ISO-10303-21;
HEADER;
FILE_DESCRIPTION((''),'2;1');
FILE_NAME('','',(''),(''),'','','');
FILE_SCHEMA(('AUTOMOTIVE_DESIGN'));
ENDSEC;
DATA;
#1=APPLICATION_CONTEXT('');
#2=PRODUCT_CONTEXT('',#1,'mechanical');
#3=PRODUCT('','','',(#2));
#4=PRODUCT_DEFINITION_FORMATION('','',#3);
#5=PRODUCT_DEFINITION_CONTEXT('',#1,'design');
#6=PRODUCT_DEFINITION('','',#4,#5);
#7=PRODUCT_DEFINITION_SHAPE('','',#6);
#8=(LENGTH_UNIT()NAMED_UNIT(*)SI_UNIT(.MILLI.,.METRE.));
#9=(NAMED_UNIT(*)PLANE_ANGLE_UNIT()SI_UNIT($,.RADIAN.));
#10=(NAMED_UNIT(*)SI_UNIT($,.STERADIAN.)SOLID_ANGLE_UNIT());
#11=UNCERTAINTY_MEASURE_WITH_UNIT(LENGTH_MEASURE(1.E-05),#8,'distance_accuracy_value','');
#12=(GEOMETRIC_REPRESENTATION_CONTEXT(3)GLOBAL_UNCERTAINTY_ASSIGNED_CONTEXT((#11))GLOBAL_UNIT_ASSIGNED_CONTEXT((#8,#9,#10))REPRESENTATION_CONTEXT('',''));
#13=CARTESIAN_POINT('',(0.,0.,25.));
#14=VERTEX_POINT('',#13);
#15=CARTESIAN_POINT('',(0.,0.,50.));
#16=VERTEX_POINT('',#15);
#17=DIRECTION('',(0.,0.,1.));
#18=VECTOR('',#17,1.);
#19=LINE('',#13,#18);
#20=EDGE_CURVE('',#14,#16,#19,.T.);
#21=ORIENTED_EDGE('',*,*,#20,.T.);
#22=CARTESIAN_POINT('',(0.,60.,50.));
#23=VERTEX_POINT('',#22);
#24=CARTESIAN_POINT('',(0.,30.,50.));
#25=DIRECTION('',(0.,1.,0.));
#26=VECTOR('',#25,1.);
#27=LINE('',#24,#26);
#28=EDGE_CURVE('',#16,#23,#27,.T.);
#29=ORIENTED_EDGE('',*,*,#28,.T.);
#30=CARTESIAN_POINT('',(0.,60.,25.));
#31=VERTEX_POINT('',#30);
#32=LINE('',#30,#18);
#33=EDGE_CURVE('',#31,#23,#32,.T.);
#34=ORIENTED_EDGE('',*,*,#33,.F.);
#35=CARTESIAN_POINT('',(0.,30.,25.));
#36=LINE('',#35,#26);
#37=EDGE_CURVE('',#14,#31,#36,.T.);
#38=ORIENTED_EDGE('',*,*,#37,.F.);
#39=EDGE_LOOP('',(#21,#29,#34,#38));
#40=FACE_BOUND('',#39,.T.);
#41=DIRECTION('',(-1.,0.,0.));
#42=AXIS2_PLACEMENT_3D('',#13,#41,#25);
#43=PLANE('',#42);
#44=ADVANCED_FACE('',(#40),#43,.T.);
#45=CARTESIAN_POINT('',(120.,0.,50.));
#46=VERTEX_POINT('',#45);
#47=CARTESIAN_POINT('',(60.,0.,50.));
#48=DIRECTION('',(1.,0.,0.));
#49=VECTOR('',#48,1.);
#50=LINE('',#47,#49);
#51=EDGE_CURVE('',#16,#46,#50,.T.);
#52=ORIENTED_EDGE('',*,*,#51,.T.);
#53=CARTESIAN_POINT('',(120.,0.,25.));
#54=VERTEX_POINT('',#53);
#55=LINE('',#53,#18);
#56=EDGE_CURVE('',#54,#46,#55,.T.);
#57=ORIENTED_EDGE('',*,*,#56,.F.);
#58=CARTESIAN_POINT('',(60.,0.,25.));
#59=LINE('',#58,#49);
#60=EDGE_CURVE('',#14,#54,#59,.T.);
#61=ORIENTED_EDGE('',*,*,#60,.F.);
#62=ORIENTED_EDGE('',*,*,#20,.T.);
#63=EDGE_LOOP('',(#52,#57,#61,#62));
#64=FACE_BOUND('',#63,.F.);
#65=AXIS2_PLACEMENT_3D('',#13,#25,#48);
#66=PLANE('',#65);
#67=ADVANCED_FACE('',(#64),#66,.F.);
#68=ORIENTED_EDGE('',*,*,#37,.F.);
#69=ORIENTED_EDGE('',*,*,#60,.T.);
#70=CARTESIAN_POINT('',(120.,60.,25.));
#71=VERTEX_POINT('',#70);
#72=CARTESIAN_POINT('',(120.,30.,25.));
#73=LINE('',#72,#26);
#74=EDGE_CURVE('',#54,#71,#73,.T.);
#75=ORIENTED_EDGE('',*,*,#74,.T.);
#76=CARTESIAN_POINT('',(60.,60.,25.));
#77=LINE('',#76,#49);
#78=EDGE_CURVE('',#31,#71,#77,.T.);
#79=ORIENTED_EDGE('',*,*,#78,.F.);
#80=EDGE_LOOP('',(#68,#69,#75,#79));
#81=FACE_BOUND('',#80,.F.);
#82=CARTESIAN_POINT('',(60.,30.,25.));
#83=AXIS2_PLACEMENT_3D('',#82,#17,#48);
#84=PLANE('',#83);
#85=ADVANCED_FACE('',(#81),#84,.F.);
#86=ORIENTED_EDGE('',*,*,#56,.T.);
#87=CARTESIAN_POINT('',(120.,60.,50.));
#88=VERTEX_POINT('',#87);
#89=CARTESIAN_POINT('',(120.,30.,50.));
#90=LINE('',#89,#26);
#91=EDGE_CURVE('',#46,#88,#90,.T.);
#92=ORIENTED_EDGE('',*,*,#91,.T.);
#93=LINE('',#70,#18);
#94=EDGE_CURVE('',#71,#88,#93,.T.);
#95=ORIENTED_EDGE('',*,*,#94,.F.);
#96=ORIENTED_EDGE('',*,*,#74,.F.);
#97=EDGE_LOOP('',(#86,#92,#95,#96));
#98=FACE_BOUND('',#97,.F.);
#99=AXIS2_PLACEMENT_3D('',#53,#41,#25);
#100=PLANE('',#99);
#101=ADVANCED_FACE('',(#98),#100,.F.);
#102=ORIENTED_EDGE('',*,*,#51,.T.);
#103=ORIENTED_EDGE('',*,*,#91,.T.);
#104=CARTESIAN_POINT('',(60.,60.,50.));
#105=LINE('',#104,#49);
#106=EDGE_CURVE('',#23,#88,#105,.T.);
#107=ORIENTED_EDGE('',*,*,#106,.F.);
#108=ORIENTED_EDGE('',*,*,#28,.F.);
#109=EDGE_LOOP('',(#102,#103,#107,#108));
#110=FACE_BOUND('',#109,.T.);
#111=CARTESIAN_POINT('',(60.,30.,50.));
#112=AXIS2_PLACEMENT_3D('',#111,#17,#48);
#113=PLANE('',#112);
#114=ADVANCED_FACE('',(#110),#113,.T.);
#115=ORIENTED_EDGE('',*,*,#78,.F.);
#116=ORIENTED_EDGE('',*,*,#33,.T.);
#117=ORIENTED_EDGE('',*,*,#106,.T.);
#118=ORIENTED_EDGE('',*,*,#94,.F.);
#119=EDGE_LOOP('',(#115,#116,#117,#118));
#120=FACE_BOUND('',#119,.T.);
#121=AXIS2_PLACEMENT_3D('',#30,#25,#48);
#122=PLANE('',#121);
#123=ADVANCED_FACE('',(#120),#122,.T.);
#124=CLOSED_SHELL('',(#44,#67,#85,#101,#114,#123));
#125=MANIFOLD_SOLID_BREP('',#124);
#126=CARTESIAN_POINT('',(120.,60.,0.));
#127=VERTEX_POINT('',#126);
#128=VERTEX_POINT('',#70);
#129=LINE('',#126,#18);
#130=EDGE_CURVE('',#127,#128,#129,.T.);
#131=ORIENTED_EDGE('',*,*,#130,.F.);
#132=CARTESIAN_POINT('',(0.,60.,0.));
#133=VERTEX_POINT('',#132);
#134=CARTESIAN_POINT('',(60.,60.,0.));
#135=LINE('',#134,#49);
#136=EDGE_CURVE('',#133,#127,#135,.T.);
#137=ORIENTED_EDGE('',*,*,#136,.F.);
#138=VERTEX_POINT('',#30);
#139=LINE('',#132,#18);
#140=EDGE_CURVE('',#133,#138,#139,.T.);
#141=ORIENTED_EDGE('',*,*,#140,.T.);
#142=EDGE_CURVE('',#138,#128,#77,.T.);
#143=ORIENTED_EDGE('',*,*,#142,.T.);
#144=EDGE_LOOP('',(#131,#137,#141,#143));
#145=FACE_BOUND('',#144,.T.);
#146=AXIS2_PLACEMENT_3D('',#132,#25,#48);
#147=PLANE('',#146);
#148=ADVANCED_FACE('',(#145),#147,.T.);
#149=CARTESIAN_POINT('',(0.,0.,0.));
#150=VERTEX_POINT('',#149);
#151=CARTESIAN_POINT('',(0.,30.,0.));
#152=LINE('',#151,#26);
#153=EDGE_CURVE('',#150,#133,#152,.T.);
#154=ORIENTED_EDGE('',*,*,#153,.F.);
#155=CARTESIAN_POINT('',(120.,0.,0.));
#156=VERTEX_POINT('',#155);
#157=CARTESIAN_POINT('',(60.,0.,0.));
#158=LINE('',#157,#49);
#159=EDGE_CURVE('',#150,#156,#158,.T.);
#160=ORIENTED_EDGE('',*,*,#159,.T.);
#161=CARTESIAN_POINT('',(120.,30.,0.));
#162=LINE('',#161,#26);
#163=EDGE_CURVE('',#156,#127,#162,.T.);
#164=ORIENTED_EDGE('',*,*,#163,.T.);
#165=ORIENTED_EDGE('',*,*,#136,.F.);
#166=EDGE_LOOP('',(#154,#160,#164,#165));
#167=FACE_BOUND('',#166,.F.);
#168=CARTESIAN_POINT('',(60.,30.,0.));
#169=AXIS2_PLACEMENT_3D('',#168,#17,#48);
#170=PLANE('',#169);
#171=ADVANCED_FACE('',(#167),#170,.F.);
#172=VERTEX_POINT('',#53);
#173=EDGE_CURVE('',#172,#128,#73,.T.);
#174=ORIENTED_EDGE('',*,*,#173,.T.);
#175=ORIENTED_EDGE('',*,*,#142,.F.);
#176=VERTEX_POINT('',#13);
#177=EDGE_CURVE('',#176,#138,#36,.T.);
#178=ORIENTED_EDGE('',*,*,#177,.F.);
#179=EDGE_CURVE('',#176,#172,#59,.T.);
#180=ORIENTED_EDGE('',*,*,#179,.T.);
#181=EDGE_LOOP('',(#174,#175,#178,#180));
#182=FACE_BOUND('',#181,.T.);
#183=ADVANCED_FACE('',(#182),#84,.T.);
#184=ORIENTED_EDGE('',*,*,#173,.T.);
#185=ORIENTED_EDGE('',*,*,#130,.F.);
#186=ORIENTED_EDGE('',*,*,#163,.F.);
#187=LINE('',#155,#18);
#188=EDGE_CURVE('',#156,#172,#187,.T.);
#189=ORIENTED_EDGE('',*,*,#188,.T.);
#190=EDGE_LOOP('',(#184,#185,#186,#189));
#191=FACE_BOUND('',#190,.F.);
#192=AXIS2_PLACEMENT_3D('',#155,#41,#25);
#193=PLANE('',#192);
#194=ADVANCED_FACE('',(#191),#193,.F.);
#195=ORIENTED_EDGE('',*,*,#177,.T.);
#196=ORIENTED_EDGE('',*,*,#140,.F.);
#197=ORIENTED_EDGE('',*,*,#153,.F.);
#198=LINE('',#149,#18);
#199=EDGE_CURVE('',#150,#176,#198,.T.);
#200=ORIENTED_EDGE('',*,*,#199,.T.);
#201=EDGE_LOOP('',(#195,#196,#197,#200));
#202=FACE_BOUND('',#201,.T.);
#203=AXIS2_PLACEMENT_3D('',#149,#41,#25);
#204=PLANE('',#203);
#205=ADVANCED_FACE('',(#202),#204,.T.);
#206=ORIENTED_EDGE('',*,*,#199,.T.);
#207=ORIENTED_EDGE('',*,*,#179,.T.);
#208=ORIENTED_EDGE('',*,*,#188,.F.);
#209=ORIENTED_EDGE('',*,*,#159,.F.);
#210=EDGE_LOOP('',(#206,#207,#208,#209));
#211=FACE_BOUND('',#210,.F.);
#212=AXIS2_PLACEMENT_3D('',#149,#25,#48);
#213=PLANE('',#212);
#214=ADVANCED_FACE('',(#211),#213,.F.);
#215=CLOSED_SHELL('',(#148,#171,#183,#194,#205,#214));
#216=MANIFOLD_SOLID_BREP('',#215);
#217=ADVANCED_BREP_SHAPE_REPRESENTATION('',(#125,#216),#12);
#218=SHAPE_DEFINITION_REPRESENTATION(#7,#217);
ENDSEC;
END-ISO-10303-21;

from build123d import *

# Parameters (mm, degrees)
F0_W     = 120
F0_H     = 60
F1_DEPTH = 25
F3_DEPTH = 25


# Not quite as in the source:
# - the program builds the solid bodies; features that only make, move or delete a surface that nothing else refers to are left out


with BuildPart() as f1:
    # F0 (on Top) → F1 (new body)
    with BuildSketch(Plane.XY):
        with Locations((60, 30)):
            Rectangle(F0_W, F0_H)
    extrude(amount=F1_DEPTH)


with BuildPart() as f3:
    # F3 (new): a face of the model
    f3_faces = [f1.part.faces().sort_by_distance(p)[0] for p in [
        (60, 30, 25),
    ]]
    extrude(f3_faces, amount=F3_DEPTH)


solid = Compound([f1.part, f3.part])
